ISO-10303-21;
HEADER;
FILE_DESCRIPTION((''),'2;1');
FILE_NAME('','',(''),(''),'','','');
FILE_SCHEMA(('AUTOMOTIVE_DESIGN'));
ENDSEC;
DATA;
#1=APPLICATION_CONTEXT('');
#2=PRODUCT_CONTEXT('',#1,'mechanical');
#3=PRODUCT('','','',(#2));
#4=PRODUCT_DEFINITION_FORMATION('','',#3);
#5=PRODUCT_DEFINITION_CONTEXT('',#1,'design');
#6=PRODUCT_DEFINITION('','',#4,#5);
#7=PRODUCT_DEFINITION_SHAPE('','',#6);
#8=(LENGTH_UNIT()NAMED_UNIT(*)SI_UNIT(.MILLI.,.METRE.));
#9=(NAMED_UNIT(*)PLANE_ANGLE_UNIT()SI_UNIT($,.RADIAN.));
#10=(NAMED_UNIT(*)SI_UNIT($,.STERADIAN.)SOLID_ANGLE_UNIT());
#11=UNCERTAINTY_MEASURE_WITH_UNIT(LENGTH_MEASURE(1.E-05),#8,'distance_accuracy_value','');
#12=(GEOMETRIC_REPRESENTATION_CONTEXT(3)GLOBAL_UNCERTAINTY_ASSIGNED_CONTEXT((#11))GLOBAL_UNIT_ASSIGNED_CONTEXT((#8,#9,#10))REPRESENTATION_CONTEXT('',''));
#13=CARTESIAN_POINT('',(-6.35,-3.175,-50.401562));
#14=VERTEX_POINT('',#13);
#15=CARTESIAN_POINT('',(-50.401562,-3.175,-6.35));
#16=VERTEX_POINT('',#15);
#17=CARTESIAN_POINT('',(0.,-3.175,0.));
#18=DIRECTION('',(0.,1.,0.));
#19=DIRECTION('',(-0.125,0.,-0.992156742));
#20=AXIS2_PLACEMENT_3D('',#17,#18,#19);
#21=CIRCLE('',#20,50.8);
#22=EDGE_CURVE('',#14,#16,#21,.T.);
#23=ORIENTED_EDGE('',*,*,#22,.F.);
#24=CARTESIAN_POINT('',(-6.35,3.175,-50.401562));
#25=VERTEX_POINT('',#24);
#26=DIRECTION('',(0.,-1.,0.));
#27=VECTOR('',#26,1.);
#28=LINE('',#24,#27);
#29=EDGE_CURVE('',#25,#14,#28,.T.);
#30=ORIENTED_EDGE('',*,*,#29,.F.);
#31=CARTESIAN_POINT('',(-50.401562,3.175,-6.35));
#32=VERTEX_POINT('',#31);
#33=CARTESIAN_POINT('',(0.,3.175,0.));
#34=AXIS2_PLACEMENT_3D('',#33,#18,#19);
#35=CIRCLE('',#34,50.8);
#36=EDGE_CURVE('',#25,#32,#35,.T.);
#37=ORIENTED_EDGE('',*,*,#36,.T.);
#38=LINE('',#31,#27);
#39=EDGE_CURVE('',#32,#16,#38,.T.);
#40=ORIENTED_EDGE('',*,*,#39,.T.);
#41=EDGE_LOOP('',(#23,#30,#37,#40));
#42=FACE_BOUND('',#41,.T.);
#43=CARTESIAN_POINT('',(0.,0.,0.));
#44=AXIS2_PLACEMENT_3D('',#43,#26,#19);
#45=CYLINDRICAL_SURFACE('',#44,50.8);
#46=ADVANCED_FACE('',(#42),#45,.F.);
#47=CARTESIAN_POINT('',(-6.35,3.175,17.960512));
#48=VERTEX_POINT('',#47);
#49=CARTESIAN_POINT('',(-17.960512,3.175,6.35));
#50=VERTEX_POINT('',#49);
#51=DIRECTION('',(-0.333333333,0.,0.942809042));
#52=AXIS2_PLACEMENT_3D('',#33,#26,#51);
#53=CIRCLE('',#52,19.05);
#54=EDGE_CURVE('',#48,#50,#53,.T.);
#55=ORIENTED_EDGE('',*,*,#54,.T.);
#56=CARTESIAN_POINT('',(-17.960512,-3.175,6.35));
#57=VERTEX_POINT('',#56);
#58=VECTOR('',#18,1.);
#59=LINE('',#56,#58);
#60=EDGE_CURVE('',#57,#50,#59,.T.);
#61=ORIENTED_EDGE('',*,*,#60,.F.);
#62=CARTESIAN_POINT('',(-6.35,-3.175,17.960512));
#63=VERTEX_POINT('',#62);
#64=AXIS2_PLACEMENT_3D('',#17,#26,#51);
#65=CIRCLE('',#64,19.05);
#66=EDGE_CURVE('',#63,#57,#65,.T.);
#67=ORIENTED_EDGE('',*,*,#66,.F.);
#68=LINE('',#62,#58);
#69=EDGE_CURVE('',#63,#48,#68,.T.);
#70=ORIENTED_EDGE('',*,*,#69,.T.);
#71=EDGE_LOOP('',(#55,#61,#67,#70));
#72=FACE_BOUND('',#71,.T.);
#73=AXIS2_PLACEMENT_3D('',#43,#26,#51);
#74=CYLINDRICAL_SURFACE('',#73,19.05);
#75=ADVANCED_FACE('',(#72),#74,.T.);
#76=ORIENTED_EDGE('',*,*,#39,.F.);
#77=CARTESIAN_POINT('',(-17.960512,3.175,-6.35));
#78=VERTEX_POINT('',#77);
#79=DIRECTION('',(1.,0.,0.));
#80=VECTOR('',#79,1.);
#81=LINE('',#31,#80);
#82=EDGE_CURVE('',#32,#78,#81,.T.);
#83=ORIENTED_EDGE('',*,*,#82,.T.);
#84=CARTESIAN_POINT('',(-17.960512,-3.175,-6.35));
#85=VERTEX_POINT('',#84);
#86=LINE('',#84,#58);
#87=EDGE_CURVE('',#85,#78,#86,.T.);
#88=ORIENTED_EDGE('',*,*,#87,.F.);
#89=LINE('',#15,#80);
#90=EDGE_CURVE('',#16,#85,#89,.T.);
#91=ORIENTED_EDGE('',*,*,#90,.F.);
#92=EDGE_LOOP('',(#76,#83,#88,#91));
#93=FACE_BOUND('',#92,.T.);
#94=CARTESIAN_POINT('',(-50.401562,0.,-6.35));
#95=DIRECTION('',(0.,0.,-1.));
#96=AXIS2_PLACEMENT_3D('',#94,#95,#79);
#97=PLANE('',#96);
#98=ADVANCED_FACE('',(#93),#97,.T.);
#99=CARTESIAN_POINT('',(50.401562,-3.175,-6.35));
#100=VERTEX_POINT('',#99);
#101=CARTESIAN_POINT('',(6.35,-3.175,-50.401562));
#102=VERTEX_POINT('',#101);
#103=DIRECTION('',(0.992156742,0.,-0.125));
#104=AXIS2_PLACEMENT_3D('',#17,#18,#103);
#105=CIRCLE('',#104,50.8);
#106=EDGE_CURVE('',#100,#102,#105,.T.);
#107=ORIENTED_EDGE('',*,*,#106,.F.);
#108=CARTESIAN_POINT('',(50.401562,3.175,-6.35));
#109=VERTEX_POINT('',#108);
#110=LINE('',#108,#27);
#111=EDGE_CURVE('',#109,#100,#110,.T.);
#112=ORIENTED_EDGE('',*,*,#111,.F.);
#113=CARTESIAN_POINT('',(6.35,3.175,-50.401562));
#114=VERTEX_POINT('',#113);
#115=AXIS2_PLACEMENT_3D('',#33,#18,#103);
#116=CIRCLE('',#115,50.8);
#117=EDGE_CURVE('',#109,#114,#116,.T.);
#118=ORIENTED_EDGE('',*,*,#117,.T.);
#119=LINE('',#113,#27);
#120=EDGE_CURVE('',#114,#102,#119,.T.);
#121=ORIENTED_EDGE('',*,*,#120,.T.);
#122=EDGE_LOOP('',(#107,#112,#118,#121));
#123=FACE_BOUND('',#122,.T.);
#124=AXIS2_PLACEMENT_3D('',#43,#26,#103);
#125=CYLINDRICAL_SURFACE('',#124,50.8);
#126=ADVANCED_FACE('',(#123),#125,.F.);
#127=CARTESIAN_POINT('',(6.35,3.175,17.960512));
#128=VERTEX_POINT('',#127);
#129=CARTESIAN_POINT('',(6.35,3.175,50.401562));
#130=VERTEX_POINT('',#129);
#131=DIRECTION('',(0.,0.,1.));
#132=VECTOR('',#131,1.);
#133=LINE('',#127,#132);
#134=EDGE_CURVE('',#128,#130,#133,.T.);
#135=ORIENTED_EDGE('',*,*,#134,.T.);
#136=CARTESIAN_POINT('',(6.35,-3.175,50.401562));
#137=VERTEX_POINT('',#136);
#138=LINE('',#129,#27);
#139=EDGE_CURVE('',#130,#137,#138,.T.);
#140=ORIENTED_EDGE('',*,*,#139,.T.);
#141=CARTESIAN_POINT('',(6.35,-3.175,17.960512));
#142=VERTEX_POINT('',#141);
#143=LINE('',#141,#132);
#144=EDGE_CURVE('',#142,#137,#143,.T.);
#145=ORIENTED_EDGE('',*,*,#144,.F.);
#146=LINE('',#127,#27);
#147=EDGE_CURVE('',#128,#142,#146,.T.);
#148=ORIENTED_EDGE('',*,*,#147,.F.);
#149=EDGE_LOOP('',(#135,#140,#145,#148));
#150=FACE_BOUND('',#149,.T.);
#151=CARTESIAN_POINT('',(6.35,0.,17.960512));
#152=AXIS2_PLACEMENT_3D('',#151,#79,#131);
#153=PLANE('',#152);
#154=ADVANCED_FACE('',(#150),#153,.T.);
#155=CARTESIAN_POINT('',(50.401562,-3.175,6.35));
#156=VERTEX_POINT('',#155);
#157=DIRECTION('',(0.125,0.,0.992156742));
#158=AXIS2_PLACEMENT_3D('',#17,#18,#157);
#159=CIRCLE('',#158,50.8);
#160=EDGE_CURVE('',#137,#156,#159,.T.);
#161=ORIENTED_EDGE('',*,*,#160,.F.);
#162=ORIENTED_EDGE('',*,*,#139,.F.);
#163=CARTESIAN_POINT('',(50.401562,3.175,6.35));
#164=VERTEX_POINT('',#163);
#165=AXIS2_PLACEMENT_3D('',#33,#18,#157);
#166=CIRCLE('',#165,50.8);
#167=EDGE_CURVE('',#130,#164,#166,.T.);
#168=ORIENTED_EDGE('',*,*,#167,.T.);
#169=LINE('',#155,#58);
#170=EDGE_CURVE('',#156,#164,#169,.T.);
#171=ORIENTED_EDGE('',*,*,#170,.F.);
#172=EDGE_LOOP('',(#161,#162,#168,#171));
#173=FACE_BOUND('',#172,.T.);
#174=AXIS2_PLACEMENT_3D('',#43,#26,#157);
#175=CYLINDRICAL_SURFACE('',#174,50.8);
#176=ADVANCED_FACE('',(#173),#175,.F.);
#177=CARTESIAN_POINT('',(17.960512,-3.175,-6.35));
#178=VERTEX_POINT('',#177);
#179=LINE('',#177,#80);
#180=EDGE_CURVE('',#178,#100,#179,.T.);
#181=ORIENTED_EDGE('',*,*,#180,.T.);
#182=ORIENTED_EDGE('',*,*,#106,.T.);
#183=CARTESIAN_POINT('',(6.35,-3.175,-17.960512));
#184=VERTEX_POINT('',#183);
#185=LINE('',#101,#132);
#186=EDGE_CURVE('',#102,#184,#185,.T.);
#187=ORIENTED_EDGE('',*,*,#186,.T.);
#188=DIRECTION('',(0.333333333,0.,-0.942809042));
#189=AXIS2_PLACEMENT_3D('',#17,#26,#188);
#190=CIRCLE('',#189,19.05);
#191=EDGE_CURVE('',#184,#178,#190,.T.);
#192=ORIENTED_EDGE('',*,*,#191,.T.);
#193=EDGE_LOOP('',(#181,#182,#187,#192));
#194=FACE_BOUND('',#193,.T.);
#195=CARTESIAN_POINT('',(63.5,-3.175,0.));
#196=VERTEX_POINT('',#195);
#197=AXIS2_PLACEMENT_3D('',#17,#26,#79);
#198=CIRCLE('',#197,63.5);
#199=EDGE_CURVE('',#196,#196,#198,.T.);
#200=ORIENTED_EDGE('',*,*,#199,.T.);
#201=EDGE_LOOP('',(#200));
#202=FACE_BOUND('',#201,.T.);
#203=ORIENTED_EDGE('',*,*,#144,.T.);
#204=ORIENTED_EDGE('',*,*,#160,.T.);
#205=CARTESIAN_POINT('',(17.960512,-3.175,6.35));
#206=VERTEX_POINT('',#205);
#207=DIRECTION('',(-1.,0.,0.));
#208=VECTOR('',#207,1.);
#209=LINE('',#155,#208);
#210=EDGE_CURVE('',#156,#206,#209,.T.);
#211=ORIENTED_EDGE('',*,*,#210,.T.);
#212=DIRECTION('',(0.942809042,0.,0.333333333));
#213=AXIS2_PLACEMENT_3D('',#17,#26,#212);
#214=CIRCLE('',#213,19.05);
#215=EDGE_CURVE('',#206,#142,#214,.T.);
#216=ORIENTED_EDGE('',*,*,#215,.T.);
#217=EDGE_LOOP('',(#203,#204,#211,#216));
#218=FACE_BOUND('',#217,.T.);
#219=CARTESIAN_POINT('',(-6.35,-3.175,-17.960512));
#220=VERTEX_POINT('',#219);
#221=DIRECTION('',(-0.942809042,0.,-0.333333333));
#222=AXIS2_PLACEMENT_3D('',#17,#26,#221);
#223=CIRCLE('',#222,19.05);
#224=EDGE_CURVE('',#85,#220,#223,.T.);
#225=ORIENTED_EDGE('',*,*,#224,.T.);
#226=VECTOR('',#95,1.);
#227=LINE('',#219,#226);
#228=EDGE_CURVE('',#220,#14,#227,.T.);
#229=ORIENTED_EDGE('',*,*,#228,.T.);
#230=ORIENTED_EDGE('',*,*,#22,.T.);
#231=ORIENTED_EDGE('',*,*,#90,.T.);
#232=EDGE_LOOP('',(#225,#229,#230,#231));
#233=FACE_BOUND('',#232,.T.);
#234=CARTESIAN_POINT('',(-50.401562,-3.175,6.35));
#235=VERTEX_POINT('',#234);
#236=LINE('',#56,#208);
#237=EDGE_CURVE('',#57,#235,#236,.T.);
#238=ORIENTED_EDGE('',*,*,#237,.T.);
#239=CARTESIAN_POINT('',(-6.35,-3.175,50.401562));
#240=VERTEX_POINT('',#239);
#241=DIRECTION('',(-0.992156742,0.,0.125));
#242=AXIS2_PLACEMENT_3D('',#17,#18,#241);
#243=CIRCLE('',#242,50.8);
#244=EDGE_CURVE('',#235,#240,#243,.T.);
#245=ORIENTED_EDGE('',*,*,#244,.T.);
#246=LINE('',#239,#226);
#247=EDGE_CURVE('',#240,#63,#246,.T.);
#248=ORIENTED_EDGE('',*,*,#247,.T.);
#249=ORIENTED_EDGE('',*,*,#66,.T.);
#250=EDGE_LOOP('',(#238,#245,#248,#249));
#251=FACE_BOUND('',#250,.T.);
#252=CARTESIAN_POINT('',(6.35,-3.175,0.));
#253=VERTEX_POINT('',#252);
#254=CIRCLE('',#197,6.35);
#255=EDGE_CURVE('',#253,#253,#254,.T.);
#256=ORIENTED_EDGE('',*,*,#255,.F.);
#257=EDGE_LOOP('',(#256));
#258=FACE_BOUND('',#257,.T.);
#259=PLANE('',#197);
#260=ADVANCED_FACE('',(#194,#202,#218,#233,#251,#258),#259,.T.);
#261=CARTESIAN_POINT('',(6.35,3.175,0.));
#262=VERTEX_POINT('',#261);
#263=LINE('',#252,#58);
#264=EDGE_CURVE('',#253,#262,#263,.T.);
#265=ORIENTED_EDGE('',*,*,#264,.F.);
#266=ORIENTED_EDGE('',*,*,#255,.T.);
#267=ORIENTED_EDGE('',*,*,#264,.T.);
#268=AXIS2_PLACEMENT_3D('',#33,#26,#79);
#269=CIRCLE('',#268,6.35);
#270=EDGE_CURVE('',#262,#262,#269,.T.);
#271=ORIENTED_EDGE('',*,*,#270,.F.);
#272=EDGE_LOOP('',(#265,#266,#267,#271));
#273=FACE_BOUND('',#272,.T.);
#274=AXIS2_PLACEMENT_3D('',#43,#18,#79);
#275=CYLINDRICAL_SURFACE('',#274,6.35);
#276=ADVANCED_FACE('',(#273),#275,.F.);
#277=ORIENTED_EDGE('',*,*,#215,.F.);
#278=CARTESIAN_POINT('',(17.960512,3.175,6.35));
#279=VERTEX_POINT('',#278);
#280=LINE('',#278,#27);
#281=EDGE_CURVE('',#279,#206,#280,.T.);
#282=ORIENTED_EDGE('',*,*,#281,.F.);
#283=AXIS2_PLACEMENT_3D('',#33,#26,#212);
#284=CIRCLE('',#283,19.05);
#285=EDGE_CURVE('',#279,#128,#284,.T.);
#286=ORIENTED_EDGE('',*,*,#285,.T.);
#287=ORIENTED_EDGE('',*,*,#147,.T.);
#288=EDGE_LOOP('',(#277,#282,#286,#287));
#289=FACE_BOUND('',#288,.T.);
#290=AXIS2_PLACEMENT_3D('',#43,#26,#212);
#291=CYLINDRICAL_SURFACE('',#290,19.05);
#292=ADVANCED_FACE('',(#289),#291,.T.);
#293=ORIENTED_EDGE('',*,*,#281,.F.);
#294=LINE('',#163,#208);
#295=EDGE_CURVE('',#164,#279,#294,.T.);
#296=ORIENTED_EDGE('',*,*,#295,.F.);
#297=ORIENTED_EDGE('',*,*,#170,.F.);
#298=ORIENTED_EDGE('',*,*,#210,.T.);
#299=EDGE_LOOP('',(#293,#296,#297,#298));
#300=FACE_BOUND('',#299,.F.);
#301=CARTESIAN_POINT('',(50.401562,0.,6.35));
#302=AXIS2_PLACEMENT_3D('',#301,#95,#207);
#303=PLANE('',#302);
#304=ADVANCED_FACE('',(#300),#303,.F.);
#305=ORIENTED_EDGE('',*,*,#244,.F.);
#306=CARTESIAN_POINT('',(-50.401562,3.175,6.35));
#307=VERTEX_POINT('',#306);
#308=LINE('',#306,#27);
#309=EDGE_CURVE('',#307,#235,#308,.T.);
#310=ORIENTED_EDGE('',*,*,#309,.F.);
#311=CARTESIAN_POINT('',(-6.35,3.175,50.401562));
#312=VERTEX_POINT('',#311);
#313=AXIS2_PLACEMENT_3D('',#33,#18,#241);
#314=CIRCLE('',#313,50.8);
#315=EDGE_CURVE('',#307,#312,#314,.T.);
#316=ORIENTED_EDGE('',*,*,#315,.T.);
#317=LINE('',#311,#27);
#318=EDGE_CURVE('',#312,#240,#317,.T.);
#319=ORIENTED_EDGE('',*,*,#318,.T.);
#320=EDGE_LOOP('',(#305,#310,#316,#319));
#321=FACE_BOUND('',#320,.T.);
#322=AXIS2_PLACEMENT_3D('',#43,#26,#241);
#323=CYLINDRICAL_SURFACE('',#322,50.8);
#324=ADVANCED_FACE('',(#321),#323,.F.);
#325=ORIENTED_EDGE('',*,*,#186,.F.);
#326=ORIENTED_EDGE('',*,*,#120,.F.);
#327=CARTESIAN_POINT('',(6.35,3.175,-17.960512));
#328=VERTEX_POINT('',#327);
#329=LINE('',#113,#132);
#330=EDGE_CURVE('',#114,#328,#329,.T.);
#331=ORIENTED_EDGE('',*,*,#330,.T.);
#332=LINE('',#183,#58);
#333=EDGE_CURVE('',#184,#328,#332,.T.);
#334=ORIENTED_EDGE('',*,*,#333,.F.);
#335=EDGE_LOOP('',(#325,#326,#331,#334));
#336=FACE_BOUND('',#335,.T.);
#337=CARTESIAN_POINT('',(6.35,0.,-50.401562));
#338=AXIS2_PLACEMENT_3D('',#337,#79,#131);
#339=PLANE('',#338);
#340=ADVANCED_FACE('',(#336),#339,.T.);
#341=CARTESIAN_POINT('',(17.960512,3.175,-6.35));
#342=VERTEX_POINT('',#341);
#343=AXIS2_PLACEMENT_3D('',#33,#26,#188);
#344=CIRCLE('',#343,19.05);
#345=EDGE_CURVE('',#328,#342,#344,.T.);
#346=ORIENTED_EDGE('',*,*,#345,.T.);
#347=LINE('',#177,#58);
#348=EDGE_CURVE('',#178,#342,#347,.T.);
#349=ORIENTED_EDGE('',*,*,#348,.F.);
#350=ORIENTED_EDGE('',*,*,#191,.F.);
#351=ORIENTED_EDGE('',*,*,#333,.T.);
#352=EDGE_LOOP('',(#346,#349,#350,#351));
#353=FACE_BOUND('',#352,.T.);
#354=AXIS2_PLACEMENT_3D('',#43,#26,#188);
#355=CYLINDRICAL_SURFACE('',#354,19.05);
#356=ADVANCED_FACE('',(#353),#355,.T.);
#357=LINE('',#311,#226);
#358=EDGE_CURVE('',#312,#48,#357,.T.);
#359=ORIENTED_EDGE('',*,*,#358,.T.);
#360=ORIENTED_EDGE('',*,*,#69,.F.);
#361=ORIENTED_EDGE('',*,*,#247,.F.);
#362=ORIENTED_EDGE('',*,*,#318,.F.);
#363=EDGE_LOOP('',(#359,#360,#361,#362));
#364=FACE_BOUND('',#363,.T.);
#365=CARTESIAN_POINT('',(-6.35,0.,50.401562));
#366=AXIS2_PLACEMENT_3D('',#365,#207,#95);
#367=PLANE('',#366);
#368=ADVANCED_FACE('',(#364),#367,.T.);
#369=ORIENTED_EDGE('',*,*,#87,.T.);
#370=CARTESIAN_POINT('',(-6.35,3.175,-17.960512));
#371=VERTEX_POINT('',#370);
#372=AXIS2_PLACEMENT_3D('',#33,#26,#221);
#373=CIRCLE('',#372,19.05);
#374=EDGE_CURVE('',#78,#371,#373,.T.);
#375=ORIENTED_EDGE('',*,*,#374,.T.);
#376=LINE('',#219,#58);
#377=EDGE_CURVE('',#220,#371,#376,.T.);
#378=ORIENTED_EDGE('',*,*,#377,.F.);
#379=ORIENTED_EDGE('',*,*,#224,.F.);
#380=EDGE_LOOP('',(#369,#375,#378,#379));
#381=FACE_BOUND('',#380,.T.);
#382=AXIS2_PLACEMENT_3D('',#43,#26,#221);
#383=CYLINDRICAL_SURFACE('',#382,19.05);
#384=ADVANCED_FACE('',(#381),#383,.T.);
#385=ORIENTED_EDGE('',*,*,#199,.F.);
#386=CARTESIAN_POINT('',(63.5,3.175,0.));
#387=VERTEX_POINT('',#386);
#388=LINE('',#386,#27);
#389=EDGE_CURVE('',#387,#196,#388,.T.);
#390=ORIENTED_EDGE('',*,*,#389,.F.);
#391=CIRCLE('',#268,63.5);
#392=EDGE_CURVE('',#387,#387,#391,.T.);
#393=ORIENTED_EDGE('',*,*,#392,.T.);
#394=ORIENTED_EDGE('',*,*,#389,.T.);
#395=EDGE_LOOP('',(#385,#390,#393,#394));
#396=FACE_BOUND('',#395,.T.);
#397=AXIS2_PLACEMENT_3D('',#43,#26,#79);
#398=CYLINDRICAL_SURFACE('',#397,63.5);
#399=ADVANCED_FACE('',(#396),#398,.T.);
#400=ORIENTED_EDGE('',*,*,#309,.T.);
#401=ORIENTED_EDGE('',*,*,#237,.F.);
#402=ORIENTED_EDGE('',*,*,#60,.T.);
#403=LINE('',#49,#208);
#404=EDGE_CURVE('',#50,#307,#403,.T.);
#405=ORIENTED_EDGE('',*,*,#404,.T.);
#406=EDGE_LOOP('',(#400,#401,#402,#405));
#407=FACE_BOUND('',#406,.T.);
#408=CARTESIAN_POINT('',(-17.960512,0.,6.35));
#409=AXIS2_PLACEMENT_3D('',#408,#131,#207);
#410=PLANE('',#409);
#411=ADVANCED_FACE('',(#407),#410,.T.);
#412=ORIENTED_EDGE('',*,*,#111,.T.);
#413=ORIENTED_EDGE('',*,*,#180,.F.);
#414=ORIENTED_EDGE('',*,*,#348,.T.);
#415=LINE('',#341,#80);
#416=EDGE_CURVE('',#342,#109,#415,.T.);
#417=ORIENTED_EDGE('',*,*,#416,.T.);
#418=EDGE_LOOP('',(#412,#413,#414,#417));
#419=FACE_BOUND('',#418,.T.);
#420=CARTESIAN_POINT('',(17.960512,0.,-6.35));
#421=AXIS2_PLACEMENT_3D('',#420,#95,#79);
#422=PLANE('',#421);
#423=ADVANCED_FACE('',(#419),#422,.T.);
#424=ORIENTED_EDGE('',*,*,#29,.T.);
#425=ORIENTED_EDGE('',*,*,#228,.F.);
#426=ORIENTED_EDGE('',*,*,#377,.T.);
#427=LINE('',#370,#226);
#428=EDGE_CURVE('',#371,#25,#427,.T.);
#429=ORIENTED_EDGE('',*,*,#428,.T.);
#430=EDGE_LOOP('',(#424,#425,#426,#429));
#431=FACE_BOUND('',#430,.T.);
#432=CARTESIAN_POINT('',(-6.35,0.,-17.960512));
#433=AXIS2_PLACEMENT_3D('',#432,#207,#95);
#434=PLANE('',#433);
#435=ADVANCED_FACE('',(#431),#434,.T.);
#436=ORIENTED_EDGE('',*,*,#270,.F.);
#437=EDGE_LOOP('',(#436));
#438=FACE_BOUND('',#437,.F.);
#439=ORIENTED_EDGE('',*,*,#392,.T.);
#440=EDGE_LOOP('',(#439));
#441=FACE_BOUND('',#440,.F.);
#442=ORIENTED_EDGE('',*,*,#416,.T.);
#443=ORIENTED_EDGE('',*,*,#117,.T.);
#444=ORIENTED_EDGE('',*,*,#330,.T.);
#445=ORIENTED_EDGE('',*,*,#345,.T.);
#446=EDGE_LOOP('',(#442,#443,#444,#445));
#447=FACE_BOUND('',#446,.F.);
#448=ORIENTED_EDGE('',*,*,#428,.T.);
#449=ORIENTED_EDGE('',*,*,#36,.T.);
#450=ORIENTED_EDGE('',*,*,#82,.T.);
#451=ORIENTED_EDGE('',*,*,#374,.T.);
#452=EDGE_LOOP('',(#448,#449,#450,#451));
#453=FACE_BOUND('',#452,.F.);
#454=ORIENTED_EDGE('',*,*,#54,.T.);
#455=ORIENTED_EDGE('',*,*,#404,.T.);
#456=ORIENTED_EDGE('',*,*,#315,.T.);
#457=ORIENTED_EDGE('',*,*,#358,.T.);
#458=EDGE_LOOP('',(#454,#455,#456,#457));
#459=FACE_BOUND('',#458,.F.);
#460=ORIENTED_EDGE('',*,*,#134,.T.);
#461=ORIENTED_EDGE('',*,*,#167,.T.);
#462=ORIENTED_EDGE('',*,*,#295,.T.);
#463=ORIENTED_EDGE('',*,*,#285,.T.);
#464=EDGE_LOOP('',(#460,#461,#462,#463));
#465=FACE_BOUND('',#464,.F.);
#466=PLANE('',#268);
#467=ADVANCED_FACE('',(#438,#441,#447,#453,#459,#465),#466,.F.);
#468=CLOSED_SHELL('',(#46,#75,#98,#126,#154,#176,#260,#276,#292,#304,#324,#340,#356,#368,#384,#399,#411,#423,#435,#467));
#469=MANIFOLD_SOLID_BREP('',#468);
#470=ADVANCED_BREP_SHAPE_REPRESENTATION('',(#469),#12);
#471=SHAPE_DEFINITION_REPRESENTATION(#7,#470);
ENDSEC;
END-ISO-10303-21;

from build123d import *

# Parameters (mm, degrees)
F0_R     = 63.5
F0_R_2   = 6.35
F1_DEPTH = 3.175


# Not quite as in the source:
# - a feature of the source that left no trace in its solid (it failed there, or was rolled back) is left out


with BuildPart() as f1:
    # F0 (on Front) → F1 (new body, symmetric)
    with BuildSketch(Plane.XZ):
        Circle(F0_R)
        with BuildLine():
            ThreePointArc((-6.35, -50.4015624758), (-35.9210244843, -35.9210244843), (-50.4015624758, -6.35))
            Line((-50.4015624758, -6.35), (-17.9605122421, -6.35))
            ThreePointArc((-17.9605122421, -6.35), (-13.4703841816, -13.4703841816), (-6.35, -17.9605122421))
            Line((-6.35, -17.9605122421), (-6.35, -50.4015624758))
        make_face(mode=Mode.SUBTRACT)
        with BuildLine():
            ThreePointArc((50.4015624758, -6.35), (35.9210244843, -35.9210244843), (6.35, -50.4015624758))
            Line((6.35, -50.4015624758), (6.35, -17.9605122421))
            ThreePointArc((6.35, -17.9605122421), (13.4703841816, -13.4703841816), (17.9605122421, -6.35))
            Line((17.9605122421, -6.35), (50.4015624758, -6.35))
        make_face(mode=Mode.SUBTRACT)
        with BuildLine():
            ThreePointArc((-50.4015624758, 6.35), (-35.9210244843, 35.9210244843), (-6.35, 50.4015624758))
            Line((-6.35, 50.4015624758), (-6.35, 17.9605122421))
            ThreePointArc((-6.35, 17.9605122421), (-13.4703841816, 13.4703841816), (-17.9605122421, 6.35))
            Line((-17.9605122421, 6.35), (-50.4015624758, 6.35))
        make_face(mode=Mode.SUBTRACT)
        Circle(F0_R_2, mode=Mode.SUBTRACT)
        with BuildLine():
            Line((50.4015624758, 6.35), (17.9605122421, 6.35))
            ThreePointArc((17.9605122421, 6.35), (13.4703841816, 13.4703841816), (6.35, 17.9605122421))
            Line((6.35, 17.9605122421), (6.35, 50.4015624758))
            ThreePointArc((6.35, 50.4015624758), (35.9210244843, 35.9210244843), (50.4015624758, 6.35))
        make_face(mode=Mode.SUBTRACT)
    extrude(amount=F1_DEPTH, both=True)


solid = f1.part
